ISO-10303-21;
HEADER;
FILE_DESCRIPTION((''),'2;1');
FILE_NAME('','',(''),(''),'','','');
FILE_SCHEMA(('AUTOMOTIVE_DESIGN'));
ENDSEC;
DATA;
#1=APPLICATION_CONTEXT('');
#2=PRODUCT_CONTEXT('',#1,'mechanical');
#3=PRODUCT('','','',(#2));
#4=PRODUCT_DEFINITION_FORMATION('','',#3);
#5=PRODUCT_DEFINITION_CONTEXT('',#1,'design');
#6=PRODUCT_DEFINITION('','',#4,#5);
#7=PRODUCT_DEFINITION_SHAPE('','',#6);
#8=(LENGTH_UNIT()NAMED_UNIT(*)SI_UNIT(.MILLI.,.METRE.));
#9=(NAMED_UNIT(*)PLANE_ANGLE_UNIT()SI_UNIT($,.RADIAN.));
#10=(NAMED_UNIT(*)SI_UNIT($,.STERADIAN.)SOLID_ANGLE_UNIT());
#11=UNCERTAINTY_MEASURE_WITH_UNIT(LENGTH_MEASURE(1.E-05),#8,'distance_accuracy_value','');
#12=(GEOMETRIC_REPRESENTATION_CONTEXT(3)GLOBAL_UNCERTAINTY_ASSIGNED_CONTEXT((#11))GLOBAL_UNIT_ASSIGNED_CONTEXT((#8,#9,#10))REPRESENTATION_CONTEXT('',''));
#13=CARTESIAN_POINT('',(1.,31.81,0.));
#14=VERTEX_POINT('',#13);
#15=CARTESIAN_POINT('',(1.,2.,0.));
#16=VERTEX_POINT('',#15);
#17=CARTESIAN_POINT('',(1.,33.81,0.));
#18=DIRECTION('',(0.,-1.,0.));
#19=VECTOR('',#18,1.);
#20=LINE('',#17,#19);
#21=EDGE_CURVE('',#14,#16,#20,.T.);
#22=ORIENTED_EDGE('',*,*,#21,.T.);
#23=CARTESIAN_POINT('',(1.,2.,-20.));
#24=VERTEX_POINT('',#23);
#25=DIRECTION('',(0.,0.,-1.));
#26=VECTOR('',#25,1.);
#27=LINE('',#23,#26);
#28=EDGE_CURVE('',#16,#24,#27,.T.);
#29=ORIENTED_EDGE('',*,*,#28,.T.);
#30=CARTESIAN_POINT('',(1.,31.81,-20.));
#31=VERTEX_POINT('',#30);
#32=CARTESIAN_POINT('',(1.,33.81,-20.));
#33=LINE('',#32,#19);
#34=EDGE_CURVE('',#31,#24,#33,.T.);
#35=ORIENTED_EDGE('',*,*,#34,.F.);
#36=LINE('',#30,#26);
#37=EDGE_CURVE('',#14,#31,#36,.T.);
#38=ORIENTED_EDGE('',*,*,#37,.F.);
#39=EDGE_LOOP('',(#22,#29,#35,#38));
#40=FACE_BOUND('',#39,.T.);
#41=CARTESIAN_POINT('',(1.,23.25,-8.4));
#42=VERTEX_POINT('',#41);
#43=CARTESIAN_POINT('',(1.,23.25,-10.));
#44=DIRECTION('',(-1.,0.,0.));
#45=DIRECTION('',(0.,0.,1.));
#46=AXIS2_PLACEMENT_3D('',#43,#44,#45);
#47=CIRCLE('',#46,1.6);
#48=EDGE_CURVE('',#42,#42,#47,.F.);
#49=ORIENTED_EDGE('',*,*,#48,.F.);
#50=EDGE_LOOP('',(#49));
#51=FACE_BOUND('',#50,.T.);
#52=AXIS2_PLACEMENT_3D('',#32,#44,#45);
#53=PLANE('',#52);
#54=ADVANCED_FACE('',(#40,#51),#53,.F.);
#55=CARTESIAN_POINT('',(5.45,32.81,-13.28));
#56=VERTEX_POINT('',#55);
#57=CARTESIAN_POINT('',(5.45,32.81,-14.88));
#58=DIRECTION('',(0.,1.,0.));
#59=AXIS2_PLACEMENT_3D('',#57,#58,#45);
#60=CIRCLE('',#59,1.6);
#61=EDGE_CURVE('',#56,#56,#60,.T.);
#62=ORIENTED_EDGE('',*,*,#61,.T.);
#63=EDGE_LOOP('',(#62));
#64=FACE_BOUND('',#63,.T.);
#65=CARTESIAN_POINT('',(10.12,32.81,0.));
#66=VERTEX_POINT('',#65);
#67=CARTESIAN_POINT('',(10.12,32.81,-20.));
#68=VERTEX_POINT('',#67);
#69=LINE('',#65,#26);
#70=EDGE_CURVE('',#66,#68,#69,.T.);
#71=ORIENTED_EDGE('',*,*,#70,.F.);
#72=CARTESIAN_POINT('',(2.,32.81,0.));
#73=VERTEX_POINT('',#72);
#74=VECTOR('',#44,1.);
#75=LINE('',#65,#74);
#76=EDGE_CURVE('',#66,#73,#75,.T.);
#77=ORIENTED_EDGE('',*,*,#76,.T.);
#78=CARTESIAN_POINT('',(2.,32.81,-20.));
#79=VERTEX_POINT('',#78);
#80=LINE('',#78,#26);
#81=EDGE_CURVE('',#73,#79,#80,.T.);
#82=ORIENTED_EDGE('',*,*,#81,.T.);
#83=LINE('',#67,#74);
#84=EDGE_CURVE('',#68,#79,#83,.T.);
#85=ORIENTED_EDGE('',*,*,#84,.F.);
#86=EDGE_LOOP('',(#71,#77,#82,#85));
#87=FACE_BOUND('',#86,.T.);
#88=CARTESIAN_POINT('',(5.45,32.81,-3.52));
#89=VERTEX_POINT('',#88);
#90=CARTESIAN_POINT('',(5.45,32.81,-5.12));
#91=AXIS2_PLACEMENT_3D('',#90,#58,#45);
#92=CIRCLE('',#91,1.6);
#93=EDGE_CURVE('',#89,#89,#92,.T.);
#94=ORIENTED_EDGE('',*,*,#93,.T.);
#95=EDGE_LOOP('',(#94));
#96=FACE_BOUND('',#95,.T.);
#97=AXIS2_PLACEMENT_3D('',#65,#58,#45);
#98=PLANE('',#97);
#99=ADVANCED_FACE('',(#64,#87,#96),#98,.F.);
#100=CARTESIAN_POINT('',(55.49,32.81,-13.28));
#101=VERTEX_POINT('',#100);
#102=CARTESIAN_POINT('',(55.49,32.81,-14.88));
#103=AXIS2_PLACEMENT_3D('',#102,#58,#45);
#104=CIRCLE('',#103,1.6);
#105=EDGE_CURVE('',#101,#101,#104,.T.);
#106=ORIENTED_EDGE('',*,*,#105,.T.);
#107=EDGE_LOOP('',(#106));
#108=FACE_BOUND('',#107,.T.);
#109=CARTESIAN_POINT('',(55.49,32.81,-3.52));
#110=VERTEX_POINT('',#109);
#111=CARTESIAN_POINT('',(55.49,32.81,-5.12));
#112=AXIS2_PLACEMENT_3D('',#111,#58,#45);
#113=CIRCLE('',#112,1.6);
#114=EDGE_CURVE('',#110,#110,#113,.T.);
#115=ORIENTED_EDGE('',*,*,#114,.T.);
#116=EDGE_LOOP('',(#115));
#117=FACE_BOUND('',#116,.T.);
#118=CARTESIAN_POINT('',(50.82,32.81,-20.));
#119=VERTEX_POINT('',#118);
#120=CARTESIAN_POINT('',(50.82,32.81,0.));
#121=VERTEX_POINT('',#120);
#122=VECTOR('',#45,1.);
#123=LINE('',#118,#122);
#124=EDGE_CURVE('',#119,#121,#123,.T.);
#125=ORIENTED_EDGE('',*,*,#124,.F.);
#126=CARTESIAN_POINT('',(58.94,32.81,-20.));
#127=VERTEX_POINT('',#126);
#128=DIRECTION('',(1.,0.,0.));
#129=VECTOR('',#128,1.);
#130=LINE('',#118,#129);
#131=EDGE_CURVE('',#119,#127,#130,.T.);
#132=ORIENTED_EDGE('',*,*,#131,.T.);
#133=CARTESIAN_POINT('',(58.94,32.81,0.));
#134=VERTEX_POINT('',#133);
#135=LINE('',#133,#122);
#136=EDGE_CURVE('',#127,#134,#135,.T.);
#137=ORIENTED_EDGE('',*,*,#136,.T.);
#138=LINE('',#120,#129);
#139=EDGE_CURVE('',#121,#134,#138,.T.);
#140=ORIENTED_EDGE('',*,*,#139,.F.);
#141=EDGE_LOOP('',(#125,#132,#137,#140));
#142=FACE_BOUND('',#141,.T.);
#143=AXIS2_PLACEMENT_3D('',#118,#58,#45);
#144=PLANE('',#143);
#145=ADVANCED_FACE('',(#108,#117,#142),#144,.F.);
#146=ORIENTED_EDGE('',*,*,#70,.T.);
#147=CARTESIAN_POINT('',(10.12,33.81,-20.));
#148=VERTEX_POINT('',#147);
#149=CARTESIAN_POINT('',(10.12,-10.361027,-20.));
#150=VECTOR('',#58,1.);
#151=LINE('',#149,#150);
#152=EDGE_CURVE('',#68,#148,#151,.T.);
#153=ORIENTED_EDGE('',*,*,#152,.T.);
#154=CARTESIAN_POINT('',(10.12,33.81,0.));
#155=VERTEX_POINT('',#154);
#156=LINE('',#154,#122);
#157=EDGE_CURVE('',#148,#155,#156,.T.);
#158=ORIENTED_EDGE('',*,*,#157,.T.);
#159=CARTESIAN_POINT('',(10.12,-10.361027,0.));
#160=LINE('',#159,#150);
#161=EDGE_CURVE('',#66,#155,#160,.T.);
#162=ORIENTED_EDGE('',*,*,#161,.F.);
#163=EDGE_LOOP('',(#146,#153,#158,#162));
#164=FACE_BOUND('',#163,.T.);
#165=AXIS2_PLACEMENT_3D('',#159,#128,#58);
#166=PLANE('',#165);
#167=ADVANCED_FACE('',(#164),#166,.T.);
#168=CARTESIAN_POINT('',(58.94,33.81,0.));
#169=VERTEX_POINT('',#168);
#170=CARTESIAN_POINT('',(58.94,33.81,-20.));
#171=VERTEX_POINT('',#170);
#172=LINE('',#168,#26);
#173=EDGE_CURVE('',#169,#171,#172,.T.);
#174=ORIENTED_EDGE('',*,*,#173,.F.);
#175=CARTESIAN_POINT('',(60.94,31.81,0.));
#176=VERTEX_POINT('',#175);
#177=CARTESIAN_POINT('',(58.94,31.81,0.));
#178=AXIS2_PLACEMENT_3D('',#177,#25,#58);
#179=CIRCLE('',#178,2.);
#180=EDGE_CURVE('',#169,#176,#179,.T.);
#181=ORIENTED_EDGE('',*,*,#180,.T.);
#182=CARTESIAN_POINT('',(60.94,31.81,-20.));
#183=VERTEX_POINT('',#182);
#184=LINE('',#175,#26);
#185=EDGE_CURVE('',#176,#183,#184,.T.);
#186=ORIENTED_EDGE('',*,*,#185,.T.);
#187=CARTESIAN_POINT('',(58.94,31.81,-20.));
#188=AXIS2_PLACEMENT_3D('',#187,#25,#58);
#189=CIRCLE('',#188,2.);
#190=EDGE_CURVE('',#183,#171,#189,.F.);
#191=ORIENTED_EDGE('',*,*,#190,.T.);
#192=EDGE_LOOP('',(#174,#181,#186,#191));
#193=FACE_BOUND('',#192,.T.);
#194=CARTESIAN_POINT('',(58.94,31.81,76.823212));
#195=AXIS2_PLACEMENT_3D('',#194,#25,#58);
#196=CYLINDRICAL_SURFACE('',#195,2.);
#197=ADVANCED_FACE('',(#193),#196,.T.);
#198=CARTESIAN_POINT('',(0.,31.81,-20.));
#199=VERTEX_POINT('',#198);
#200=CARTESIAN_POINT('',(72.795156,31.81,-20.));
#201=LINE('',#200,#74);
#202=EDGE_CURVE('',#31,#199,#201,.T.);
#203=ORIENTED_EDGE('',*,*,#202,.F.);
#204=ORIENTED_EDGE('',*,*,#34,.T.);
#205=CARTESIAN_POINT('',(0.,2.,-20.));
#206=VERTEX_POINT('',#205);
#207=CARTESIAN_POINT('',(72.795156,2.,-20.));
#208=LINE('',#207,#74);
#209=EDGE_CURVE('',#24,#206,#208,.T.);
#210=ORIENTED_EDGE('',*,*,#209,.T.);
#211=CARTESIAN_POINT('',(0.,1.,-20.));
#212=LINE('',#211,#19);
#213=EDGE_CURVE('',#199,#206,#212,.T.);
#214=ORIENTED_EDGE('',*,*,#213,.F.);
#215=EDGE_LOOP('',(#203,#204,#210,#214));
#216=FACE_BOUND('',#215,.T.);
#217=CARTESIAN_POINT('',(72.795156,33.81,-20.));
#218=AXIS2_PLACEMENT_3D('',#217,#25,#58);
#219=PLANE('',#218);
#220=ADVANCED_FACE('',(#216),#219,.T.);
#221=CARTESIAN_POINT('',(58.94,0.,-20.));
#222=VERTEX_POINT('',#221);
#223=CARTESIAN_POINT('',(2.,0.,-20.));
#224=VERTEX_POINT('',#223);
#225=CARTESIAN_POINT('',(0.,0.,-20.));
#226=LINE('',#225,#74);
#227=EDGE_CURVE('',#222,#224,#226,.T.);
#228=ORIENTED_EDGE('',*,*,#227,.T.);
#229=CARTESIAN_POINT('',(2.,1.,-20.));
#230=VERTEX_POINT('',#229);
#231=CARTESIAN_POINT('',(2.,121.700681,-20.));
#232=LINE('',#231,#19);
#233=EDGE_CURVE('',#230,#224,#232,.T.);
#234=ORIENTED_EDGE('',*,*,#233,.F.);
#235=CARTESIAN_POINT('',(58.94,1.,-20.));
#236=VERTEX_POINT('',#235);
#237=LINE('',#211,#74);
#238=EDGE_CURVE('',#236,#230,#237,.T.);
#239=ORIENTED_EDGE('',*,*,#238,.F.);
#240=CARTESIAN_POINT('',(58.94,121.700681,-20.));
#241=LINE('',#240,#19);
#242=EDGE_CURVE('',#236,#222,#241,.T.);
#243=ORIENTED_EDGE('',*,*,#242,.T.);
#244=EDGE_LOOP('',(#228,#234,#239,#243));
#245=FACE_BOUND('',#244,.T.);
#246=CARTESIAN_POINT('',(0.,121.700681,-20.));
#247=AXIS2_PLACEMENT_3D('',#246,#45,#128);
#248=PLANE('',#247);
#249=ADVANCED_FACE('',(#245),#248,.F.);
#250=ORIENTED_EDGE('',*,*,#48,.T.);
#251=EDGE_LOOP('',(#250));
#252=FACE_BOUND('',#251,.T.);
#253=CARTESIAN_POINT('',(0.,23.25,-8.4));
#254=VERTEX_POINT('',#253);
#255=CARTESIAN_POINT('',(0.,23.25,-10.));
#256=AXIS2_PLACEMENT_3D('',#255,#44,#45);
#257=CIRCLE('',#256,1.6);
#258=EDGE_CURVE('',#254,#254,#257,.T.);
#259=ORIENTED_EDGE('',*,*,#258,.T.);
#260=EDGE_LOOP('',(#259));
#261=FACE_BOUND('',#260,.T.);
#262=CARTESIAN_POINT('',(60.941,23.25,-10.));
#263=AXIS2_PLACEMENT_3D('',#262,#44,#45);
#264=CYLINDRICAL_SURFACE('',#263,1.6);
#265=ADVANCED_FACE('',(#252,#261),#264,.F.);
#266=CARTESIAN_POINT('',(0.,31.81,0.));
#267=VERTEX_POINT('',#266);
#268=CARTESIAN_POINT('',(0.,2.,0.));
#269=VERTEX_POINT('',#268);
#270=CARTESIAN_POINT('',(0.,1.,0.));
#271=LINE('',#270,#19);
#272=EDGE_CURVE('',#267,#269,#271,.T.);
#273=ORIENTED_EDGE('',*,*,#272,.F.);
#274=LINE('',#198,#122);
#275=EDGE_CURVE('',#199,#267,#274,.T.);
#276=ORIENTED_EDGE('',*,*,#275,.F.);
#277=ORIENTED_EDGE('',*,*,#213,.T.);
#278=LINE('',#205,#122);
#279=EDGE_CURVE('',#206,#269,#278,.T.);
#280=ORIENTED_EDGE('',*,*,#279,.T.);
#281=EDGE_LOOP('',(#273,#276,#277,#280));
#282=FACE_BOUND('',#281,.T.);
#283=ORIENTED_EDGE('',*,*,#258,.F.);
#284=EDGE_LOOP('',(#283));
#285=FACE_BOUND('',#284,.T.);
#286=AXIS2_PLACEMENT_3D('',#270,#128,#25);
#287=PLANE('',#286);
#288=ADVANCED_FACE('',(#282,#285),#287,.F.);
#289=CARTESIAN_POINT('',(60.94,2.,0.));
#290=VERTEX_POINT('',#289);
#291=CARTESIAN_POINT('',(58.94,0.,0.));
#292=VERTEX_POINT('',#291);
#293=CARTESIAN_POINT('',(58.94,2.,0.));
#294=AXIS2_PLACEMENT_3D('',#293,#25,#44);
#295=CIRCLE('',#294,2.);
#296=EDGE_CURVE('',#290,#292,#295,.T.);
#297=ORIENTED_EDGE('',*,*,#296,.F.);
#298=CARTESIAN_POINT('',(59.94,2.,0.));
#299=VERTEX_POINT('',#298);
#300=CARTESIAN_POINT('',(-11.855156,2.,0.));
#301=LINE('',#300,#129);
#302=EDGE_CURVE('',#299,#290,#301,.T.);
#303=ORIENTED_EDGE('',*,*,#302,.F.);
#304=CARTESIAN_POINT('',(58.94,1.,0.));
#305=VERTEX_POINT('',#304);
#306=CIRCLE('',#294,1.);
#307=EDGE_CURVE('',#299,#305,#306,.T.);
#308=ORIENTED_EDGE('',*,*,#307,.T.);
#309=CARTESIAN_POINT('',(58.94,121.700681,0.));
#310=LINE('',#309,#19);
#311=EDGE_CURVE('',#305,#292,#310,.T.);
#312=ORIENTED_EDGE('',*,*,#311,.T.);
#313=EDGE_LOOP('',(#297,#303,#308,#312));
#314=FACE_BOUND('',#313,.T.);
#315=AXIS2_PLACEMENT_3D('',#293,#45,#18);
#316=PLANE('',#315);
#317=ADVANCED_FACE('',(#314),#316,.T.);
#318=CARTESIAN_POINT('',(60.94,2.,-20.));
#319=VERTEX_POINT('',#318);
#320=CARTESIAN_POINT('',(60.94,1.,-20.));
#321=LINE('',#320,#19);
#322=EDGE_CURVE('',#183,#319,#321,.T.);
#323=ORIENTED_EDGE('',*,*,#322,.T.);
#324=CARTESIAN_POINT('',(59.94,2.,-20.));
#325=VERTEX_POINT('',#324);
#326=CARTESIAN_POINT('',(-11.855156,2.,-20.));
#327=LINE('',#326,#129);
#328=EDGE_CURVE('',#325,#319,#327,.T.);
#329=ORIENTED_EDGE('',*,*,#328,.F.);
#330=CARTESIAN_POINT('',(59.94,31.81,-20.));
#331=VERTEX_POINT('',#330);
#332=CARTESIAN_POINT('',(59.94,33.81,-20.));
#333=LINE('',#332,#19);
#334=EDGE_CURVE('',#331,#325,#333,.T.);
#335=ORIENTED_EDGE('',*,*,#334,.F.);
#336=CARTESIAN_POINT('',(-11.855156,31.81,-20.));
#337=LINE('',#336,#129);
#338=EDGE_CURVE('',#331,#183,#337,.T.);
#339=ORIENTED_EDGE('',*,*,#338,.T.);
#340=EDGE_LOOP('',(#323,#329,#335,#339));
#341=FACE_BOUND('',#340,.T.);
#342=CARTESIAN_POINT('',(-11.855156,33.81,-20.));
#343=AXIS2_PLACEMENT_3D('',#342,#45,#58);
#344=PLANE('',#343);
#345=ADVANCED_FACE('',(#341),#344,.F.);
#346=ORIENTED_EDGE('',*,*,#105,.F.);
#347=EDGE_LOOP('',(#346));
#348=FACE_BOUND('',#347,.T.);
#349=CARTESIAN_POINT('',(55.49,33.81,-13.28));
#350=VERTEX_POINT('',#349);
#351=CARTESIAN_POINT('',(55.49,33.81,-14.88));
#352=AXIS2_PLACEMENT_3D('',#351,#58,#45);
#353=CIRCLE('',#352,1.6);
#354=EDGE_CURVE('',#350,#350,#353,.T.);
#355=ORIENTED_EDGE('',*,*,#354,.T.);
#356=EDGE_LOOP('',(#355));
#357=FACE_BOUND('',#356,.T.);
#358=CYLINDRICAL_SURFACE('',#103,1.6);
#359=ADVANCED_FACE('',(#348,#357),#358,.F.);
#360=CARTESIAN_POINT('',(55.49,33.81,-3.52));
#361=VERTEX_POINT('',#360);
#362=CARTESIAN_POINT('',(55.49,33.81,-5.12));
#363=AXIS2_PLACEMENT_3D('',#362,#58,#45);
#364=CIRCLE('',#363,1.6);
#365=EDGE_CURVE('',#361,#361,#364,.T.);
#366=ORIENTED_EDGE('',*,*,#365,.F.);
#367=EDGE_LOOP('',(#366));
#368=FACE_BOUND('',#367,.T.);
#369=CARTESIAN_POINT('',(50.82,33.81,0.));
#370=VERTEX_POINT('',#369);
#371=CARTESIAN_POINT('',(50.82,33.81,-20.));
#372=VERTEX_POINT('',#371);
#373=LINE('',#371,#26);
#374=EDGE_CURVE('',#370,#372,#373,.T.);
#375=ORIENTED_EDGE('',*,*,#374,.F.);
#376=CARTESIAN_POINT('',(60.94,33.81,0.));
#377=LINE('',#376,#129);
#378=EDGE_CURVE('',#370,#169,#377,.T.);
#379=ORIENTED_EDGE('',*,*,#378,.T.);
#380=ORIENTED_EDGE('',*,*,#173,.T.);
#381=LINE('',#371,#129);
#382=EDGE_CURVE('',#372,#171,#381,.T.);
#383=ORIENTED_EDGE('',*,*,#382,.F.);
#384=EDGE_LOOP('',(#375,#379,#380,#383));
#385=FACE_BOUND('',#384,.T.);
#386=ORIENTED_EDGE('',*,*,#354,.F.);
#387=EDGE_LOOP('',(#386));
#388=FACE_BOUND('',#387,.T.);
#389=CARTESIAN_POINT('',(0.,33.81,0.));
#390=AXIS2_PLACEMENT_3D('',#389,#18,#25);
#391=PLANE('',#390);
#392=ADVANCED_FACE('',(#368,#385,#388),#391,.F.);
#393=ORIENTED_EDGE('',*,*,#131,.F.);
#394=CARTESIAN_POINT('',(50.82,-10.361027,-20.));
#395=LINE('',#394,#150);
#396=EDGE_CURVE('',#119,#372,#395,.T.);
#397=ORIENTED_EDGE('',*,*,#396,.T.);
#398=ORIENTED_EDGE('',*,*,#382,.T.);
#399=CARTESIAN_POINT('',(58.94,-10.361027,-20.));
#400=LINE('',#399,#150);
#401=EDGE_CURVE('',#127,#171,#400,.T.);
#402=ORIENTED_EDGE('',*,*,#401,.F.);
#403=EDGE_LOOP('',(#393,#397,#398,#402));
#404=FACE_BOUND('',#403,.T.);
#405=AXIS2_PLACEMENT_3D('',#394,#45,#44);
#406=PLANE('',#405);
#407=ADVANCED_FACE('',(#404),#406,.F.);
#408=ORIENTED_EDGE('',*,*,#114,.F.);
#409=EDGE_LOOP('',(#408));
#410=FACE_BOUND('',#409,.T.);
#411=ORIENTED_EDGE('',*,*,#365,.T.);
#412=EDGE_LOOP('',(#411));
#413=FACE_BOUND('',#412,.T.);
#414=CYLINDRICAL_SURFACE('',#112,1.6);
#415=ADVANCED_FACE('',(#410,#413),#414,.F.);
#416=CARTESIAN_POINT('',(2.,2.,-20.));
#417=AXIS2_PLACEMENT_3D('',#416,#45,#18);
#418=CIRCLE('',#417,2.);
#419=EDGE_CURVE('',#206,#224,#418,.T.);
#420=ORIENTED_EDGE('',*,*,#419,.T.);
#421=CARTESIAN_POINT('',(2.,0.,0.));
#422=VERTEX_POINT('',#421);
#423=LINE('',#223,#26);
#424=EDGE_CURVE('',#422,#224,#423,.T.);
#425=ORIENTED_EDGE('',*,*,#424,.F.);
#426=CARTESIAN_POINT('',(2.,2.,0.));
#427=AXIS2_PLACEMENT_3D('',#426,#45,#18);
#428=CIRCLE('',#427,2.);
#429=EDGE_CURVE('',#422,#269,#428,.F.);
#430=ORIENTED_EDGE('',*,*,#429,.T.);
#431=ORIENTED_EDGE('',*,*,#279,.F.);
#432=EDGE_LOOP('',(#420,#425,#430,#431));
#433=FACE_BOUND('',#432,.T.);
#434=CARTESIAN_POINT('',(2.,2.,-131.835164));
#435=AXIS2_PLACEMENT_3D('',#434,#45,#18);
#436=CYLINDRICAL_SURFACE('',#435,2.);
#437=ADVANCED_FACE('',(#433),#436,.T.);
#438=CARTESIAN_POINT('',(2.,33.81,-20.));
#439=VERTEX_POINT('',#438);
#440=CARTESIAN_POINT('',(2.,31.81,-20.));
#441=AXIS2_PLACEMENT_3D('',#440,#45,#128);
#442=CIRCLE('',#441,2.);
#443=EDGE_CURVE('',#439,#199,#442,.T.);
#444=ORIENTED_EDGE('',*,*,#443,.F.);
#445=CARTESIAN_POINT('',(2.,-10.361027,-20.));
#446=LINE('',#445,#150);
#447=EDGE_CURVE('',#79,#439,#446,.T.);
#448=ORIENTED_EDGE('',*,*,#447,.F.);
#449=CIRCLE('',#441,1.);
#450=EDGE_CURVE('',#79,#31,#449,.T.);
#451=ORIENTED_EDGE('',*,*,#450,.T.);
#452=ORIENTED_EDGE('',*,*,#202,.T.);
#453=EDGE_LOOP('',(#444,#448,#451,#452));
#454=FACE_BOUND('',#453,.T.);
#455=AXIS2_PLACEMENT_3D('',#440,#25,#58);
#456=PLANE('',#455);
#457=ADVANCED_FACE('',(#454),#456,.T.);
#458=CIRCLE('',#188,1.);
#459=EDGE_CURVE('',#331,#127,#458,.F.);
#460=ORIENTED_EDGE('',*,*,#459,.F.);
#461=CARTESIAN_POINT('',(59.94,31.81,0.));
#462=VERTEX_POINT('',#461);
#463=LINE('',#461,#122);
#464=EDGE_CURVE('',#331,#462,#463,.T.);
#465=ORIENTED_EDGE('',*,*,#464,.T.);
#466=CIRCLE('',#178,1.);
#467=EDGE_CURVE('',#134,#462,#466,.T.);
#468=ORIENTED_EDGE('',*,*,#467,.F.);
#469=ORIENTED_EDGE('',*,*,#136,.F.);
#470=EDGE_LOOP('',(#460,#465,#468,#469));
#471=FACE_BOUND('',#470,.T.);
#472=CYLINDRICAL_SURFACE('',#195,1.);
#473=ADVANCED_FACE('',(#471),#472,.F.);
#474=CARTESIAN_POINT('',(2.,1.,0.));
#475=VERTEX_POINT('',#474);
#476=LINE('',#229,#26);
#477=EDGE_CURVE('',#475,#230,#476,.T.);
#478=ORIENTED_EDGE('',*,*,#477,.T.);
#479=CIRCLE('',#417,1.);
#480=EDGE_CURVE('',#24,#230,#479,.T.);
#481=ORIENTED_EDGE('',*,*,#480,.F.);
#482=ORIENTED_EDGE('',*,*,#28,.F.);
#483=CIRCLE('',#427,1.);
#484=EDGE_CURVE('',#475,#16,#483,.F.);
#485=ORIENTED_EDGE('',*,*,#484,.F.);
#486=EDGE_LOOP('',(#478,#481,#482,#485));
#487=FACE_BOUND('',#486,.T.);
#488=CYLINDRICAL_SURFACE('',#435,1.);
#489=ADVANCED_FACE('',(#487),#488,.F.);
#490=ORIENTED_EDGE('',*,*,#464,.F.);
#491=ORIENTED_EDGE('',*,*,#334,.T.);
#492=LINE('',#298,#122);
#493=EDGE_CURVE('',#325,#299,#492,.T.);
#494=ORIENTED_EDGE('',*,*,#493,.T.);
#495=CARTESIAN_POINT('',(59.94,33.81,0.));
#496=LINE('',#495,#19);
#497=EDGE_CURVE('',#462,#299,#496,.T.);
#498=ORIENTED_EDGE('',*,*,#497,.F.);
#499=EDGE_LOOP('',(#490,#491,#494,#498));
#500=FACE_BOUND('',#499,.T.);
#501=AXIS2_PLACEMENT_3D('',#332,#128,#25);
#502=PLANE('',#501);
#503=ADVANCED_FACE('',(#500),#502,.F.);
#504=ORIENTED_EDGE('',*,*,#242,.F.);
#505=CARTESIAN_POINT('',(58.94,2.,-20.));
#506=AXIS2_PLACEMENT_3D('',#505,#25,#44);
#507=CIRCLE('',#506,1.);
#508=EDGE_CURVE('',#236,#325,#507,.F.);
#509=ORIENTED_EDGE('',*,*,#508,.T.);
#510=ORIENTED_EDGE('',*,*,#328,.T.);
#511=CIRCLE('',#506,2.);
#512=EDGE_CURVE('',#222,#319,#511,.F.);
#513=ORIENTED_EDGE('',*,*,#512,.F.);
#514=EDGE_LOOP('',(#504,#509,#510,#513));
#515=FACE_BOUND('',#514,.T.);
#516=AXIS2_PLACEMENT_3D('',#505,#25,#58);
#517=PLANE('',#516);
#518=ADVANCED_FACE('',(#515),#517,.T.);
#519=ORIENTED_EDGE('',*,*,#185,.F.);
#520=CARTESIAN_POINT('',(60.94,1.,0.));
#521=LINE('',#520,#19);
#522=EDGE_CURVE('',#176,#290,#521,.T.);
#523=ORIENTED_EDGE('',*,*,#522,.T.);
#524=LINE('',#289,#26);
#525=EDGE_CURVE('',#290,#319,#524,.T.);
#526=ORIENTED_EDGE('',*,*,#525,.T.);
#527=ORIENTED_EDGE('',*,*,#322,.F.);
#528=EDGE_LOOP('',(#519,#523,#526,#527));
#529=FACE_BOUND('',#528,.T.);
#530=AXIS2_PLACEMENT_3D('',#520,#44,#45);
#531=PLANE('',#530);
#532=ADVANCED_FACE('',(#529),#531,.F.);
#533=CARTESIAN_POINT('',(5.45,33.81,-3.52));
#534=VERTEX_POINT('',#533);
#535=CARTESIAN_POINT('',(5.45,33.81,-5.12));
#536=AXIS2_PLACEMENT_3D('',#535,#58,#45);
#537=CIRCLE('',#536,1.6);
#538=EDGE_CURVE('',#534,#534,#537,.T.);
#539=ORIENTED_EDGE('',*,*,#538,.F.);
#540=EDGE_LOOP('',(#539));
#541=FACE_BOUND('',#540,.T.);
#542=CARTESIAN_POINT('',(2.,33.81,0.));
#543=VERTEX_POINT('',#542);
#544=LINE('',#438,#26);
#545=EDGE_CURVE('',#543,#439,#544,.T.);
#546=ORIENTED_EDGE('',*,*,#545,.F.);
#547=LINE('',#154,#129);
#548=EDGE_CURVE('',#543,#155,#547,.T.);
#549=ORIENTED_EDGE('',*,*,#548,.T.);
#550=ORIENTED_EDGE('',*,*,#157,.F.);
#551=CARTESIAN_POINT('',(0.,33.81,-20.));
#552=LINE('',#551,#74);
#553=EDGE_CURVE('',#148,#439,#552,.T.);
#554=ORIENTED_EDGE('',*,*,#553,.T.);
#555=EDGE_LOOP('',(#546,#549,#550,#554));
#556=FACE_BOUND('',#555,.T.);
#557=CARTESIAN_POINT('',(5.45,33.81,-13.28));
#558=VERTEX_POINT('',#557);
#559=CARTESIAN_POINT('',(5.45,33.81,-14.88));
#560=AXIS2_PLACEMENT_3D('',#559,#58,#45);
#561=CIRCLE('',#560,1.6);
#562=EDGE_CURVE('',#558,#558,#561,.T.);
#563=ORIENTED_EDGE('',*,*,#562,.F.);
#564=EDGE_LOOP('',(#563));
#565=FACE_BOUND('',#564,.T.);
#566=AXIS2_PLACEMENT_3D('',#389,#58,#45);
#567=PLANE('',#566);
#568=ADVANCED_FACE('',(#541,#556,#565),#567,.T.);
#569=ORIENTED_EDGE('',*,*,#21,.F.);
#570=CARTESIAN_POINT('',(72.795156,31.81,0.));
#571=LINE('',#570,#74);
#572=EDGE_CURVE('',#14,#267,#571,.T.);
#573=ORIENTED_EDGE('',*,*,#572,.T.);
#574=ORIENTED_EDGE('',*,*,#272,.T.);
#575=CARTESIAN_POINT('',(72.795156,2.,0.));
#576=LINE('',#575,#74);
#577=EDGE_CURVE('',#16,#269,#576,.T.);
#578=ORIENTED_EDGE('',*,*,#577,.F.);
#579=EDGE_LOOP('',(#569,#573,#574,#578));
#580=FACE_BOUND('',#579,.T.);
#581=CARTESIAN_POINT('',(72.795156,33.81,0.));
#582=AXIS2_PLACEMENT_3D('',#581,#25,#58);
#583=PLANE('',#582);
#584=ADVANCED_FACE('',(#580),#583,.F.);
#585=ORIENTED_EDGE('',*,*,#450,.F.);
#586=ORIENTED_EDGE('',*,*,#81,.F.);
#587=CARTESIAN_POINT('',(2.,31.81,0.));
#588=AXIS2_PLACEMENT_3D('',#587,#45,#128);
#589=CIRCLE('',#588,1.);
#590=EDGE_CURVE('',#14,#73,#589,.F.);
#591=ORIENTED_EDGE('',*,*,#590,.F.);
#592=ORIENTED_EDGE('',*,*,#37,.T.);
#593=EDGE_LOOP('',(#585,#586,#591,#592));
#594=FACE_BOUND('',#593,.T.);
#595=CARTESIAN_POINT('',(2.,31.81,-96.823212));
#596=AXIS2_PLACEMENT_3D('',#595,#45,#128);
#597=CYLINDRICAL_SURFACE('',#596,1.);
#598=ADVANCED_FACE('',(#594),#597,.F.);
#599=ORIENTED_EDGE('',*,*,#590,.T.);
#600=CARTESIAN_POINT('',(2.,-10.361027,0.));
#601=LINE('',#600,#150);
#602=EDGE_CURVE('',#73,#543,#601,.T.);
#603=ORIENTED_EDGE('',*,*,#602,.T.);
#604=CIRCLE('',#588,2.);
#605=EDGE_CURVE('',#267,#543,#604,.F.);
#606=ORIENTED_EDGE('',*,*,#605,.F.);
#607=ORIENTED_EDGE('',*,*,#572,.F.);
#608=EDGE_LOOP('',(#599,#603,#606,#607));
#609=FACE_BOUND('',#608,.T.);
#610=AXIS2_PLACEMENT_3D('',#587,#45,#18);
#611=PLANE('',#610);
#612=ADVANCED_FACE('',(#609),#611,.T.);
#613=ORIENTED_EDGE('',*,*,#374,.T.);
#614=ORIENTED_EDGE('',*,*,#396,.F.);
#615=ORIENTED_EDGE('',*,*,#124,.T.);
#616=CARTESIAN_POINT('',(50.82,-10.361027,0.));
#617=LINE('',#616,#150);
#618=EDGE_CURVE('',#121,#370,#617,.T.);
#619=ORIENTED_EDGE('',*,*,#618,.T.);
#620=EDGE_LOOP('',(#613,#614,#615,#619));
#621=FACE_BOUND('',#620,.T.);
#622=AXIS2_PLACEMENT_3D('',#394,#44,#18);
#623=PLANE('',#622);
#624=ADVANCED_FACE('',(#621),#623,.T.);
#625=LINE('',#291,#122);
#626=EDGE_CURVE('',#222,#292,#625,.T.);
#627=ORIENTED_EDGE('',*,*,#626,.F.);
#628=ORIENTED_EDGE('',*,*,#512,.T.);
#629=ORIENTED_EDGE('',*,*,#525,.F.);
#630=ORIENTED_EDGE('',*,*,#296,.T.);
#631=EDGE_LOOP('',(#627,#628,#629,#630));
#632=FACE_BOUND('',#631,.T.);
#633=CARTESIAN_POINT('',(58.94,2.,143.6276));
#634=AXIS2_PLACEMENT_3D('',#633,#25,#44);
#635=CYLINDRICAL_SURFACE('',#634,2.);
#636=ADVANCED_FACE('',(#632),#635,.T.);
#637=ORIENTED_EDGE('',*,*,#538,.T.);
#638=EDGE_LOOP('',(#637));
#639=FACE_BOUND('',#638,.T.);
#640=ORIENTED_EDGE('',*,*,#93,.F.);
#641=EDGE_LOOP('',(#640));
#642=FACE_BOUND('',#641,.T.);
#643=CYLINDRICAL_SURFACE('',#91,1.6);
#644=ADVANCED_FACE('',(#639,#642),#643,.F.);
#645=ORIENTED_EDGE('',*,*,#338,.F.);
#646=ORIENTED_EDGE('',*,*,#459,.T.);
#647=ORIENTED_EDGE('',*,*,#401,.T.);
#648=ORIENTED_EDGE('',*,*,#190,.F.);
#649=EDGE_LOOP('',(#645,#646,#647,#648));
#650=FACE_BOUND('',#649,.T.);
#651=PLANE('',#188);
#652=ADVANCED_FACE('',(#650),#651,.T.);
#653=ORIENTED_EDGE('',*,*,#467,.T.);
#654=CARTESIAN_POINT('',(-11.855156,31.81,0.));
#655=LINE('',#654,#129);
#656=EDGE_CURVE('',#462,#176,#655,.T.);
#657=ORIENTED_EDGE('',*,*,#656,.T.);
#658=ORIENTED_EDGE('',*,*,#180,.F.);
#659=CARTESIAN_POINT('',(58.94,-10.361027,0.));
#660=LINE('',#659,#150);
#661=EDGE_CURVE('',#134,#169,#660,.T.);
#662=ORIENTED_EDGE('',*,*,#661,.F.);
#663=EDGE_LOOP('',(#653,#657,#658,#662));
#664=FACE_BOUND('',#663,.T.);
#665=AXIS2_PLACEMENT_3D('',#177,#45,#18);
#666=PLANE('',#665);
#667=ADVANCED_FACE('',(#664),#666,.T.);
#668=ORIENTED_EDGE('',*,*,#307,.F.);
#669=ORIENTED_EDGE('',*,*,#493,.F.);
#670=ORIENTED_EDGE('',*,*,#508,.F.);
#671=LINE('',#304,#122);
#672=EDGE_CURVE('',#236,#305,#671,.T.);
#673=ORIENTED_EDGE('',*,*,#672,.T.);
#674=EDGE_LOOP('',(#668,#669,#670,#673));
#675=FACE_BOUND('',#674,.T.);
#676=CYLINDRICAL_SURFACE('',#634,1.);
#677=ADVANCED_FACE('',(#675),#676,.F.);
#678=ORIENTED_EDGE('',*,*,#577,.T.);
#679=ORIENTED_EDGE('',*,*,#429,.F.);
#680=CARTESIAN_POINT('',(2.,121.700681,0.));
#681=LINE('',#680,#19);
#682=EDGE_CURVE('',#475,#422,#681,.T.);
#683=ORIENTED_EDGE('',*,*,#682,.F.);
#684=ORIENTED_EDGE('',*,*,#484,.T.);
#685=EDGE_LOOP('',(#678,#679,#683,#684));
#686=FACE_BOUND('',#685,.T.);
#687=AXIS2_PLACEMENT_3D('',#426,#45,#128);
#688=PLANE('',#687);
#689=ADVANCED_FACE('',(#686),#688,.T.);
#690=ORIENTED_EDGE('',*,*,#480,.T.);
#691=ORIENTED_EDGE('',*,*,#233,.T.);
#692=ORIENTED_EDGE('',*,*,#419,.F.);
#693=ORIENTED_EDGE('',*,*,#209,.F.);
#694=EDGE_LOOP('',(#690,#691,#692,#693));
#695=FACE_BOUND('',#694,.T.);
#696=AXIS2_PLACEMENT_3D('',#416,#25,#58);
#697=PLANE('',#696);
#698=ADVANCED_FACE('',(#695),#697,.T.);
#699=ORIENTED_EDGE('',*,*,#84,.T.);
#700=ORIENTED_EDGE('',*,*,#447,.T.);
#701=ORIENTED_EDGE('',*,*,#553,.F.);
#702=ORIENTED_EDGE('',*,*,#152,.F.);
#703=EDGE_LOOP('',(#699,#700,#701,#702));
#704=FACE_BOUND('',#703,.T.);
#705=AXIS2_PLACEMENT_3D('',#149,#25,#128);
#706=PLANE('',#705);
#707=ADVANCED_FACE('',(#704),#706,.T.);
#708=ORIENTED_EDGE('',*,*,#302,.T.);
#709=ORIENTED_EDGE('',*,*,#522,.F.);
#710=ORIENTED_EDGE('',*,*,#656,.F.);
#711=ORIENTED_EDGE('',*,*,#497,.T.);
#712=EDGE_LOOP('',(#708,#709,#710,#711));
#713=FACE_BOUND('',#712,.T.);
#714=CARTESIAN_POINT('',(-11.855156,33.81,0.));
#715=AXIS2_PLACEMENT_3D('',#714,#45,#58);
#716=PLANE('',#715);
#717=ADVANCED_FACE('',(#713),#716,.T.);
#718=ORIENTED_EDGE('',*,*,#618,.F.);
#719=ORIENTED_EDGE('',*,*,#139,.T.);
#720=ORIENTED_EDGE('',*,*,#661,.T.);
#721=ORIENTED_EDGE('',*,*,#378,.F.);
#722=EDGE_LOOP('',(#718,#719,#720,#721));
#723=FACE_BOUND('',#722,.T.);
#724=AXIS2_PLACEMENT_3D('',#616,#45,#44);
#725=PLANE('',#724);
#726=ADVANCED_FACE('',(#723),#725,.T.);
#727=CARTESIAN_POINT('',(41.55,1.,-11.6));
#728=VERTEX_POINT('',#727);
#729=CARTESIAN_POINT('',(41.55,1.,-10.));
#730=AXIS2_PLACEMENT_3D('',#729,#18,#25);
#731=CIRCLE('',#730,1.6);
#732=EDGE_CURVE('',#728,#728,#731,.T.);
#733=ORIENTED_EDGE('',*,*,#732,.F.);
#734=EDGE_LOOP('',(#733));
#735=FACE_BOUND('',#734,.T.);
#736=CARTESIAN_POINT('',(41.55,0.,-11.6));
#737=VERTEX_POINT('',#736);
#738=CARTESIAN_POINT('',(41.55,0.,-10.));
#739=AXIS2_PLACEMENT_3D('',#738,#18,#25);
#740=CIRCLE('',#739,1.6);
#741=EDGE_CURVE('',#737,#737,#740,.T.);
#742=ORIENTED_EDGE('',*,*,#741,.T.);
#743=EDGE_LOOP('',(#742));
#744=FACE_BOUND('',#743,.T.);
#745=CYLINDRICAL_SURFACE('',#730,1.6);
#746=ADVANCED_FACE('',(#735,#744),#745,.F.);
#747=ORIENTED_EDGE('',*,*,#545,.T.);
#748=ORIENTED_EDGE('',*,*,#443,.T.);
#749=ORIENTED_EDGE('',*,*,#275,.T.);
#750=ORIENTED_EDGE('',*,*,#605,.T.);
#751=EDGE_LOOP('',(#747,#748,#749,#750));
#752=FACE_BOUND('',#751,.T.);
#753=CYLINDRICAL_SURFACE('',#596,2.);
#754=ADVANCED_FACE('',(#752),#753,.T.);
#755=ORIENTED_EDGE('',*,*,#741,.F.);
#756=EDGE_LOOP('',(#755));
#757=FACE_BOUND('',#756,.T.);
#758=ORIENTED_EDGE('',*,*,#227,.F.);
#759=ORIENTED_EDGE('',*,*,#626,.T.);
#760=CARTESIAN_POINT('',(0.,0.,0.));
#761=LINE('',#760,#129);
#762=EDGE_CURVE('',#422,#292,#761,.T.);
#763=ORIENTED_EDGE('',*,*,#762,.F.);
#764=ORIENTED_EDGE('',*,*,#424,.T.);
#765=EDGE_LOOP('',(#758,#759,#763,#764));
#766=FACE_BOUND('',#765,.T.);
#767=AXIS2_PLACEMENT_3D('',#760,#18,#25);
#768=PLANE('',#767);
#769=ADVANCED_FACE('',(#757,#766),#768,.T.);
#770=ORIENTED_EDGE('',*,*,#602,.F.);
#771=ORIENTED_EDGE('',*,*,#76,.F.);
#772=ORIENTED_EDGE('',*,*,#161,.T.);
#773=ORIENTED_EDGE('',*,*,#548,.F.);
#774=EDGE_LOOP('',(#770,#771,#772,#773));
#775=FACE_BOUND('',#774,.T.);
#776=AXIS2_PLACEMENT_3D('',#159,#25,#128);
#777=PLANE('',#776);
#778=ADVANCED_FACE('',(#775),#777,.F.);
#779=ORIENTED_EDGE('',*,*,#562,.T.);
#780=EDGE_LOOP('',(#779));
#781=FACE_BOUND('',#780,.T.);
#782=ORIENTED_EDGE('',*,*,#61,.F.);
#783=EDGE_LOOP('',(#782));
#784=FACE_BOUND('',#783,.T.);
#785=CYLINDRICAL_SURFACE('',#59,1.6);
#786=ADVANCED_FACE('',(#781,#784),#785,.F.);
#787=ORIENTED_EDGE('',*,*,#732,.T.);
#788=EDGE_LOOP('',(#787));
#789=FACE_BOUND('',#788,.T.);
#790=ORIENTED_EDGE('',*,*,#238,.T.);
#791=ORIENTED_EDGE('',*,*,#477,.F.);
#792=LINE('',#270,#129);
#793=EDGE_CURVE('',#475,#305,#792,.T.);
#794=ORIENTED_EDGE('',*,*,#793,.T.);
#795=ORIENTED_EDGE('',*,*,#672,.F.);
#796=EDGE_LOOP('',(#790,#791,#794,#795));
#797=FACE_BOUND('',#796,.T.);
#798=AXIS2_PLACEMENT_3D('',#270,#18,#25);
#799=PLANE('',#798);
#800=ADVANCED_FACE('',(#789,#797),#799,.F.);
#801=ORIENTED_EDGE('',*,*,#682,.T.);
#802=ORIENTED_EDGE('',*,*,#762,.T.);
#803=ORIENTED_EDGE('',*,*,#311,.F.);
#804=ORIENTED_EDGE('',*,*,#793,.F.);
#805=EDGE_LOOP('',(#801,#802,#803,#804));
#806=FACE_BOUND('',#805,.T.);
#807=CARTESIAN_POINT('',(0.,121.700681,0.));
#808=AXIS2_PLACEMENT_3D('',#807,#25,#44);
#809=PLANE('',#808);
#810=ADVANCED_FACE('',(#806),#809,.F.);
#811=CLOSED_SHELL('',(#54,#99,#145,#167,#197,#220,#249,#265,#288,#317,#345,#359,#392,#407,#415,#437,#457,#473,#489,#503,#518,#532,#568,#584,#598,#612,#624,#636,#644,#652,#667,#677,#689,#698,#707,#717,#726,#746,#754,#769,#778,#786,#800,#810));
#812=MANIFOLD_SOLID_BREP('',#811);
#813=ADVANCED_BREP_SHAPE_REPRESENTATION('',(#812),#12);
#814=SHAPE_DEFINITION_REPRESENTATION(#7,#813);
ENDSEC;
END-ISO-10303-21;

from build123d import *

# Parameters (mm, degrees)
SKETCH_2_W                = 60.94
SKETCH_2_H                = 20
EXTRUDE_1_DEPTH           = 1
SKETCH_3_W                = 1
SKETCH_3_H                = 20
EXTRUDE_2_DEPTH           = 32.81
SKETCH_4_W                = 1
SKETCH_4_H                = 20
EXTRUDE_3_DEPTH           = 32.81
SKETCH_9_W                = 20
SKETCH_9_H                = 1
EXTRUDE_8_DEPTH           = 9.12
SKETCH_10_W               = 20
SKETCH_10_H               = 1
EXTRUDE_9_DEPTH           = 9.12
SKETCH_13_R               = 1.6
CUT_EXTRUDE_2_DEPTH       = 1
SKETCH_14_R               = 1.6
CUT_EXTRUDE_3_DEPTH       = 1
SKETCH_15_R               = 1.6
CUT_EXTRUDE_4_DEPTH       = 1
SKETCH_16_R               = 1.6
CUT_EXTRUDE_5_DEPTH       = 1
SKETCH_17_R               = 1.6
CUT_EXTRUDE_6_DEPTH       = 1
CUT_EXTRUDE_7_REACH       = 74.504
SKETCH_18_R               = 1.6
SHEET_START               = 1
SHEET_METAL_1_OUTLINE_W   = 10.12
SHEET_METAL_1_OUTLINE_H   = 20
SHEET_METAL_1_OUTLINE_R   = 1.6
SHEET_METAL_1_DEPTH       = 32.81
SHEET_METAL_1_2_OUTLINE_W = 40.64238898
SHEET_METAL_1_2_OUTLINE_H = 20
SHEET_METAL_1_2_OUTLINE_R = 1.6
SHEET_METAL_1_2_DEPTH     = 1
SHEET_START_2             = -20
SHEET_METAL_1_3_DEPTH     = 20
SHEET_METAL_1_3_2_DEPTH   = 3.5199999
SHEET_START_3             = -3.5199999
SHEET_METAL_1_3_3_DEPTH   = 3.5199999
SHEET_START_4             = -13.2799999
SHEET_METAL_1_3_4_DEPTH   = 6.5599998
SHEET_METAL_1_3_5_DEPTH   = 1.6799998
SHEET_START_5             = -8.3999999
SHEET_METAL_1_3_6_DEPTH   = 1.6799998
SHEET_START_6             = -16.4800001
SHEET_METAL_1_3_7_DEPTH   = 12.9600002


with BuildPart() as part:
    # Sketch 2 → ﾎﾞｽ - 押し出し1 (new body)
    with BuildSketch(Plane(origin=(0, 0, 0), x_dir=(1, 0, 0), z_dir=(0, 1, 0))):
        with Locations((30.47, 10)):
            Rectangle(SKETCH_2_W, SKETCH_2_H)
    extrude(amount=EXTRUDE_1_DEPTH)

    # ｽｹｯﾁ3 → ﾎﾞｽ - 押し出し2 (add)
    with BuildSketch(Plane(origin=(0, 1, 0), x_dir=(1, 0, 0), z_dir=(0, 1, 0))):
        with Locations((60.44, 10)):
            Rectangle(SKETCH_3_W, SKETCH_3_H)
    extrude(amount=EXTRUDE_2_DEPTH)

    # ｽｹｯﾁ4 → ﾎﾞｽ - 押し出し3 (add)
    with BuildSketch(Plane(origin=(0, 1, 0), x_dir=(1, 0, 0), z_dir=(0, 1, 0))):
        with Locations((0.5, 10)):
            Rectangle(SKETCH_4_W, SKETCH_4_H)
    extrude(amount=EXTRUDE_3_DEPTH)

    # ｽｹｯﾁ9 → ﾎﾞｽ - 押し出し8 (add)
    with BuildSketch(Plane.ZY.offset(-59.94)):
        with Locations((-10, 33.31)):
            Rectangle(SKETCH_9_W, SKETCH_9_H)
    extrude(amount=EXTRUDE_8_DEPTH)

    # ｽｹｯﾁ10 → ﾎﾞｽ - 押し出し9 (add)
    with BuildSketch(Plane(origin=(1, 0, 0), x_dir=(0, 0, -1), z_dir=(1, 0, 0))):
        with Locations((10, 33.31)):
            Rectangle(SKETCH_10_W, SKETCH_10_H)
    extrude(amount=EXTRUDE_9_DEPTH)

    # ｽｹｯﾁ13 → ｶｯﾄ - 押し出し2 (cut)
    with BuildSketch(Plane(origin=(0, 33.81, 0), x_dir=(1, 0, 0), z_dir=(0, 1, 0))):
        with Locations(Location((55.49, 5.12, 0), (0, 0, 270))):
            Circle(SKETCH_13_R)
    extrude(amount=-CUT_EXTRUDE_2_DEPTH, mode=Mode.SUBTRACT)

    # ｽｹｯﾁ14 → ｶｯﾄ - 押し出し3 (cut)
    with BuildSketch(Plane(origin=(0, 33.81, 0), x_dir=(1, 0, 0), z_dir=(0, 1, 0))):
        with Locations(Location((55.49, 14.88, 0), (0, 0, 270))):
            Circle(SKETCH_14_R)
    extrude(amount=-CUT_EXTRUDE_3_DEPTH, mode=Mode.SUBTRACT)

    # ｽｹｯﾁ15 → ｶｯﾄ - 押し出し4 (cut)
    with BuildSketch(Plane(origin=(0, 33.81, 0), x_dir=(1, 0, 0), z_dir=(0, 1, 0))):
        with Locations(Location((5.45, 5.12, 0), (0, 0, 270))):
            Circle(SKETCH_15_R)
    extrude(amount=-CUT_EXTRUDE_4_DEPTH, mode=Mode.SUBTRACT)

    # ｽｹｯﾁ16 → ｶｯﾄ - 押し出し5 (cut)
    with BuildSketch(Plane(origin=(0, 33.81, 0), x_dir=(1, 0, 0), z_dir=(0, 1, 0))):
        with Locations(Location((5.45, 14.88, 0), (0, 0, 270))):
            Circle(SKETCH_16_R)
    extrude(amount=-CUT_EXTRUDE_5_DEPTH, mode=Mode.SUBTRACT)

    # ｽｹｯﾁ17 → ｶｯﾄ - 押し出し6 (cut)
    with BuildSketch(Plane(origin=(0, 0, 0), x_dir=(-1, 0, 0), z_dir=(0, -1, 0))):
        with Locations(Location((-41.55, 10, 0), (0, 0, 90))):
            Circle(SKETCH_17_R)
    extrude(amount=-CUT_EXTRUDE_6_DEPTH, mode=Mode.SUBTRACT)

    # ｽｹｯﾁ18 → ｶｯﾄ - 押し出し7 (cut, up to next)
    with BuildSketch(Plane.ZY, mode=Mode.PRIVATE) as cut_extrude_7_sk1:
        with Locations((-10, 23.25)):
            Circle(SKETCH_18_R)
    cut_extrude_7_tool1 = extrude(cut_extrude_7_sk1.sketch, amount=-CUT_EXTRUDE_7_REACH, mode=Mode.PRIVATE) & part.part
    add(cut_extrude_7_tool1.solids().sort_by_distance((0, 23.25, -10))[0], mode=Mode.SUBTRACT)

    # Sheet Metal 1: read off the stored shape, not the designer's step
    # Sheet Metal 1 outline → Sheet Metal 1 (cut)
    # profile 1 of 2: a face of its own
    with BuildSketch(Plane(origin=(0, 0, 0), x_dir=(1, 0, 0), z_dir=(0, 1, 0)).offset(SHEET_START)):
        with Locations((55.88, 10)):
            Rectangle(SHEET_METAL_1_OUTLINE_W, SHEET_METAL_1_OUTLINE_H)
        with Locations((55.49, 14.88)):
            Circle(SHEET_METAL_1_OUTLINE_R, mode=Mode.SUBTRACT)
        with Locations((55.49, 5.12)):
            Circle(SHEET_METAL_1_OUTLINE_R, mode=Mode.SUBTRACT)
    # profile 2 of 2: a face of its own
    with BuildSketch(Plane(origin=(0, 0, 0), x_dir=(1, 0, 0), z_dir=(0, 1, 0)).offset(SHEET_START)):
        with Locations((5.06, 10)):
            Rectangle(SHEET_METAL_1_OUTLINE_W, SHEET_METAL_1_OUTLINE_H)
        with Locations((5.45, 5.12)):
            Circle(SHEET_METAL_1_OUTLINE_R, mode=Mode.SUBTRACT)
        with Locations((5.45, 14.88)):
            Circle(SHEET_METAL_1_OUTLINE_R, mode=Mode.SUBTRACT)
    extrude(amount=SHEET_METAL_1_DEPTH, mode=Mode.SUBTRACT)

    # Sheet Metal 1 2 outline → Sheet Metal 1 2 (add)
    # profile 1 of 2: a face of its own
    with BuildSketch(Plane(origin=(0, 0, 0), x_dir=(1, 0, 0), z_dir=(0, 1, 0))):
        with Locations((81.26119449, 10)):
            Rectangle(SHEET_METAL_1_2_OUTLINE_W, SHEET_METAL_1_2_OUTLINE_H)
        with Locations((96.91238898, 5.12)):
            Circle(SHEET_METAL_1_2_OUTLINE_R, mode=Mode.SUBTRACT)
        with Locations((96.91238898, 14.88)):
            Circle(SHEET_METAL_1_2_OUTLINE_R, mode=Mode.SUBTRACT)
    # profile 2 of 2: a face of its own
    with BuildSketch(Plane(origin=(0, 0, 0), x_dir=(1, 0, 0), z_dir=(0, 1, 0))):
        with Locations((-20.32119449, 10)):
            Rectangle(SHEET_METAL_1_2_OUTLINE_W, SHEET_METAL_1_2_OUTLINE_H)
        with Locations((-35.97238898, 5.12)):
            Circle(SHEET_METAL_1_2_OUTLINE_R, mode=Mode.SUBTRACT)
        with Locations((-21.60619449, 10)):
            Circle(SHEET_METAL_1_2_OUTLINE_R, mode=Mode.SUBTRACT)
        with Locations((-35.97238898, 14.88)):
            Circle(SHEET_METAL_1_2_OUTLINE_R, mode=Mode.SUBTRACT)
    extrude(amount=SHEET_METAL_1_2_DEPTH)

    # Sheet Metal 1 3: read off the stored shape, not the designer's step
    # Sheet Metal 1 3 outline → Sheet Metal 1 3 (cut)
    with BuildSketch(Plane.XY.offset(SHEET_START_2)):
        with BuildLine():
            ThreePointArc((2, 0), (1, 0.267949193), (0.267949193, 1))
            Line((0.267949193, 1), (-40.64238898, 1))
            Line((-40.64238898, 1), (-40.64238898, 0))
            Line((-40.64238898, 0), (2, 0))
        make_face()
        with BuildLine():
            Line((101.58238898, 1), (60.672050807, 1))
            ThreePointArc((60.672050807, 1), (59.94, 0.267949193), (58.94, 0))
            Line((58.94, 0), (101.58238898, 0))
            Line((101.58238898, 0), (101.58238898, 1))
        make_face()
    extrude(amount=SHEET_METAL_1_3_DEPTH, mode=Mode.SUBTRACT)

    # Sheet Metal 1 3 2 outline → Sheet Metal 1 3 2 (add)
    with BuildSketch(Plane.XY.offset(SHEET_START_2)):
        with BuildLine():
            Line((2, 32.81), (10.12, 32.81))
            Line((10.12, 32.81), (10.12, 33.81))
            Line((10.12, 33.81), (2, 33.81))
            ThreePointArc((2, 33.81), (0.585786438, 33.224213562), (0, 31.81))
            Line((0, 31.81), (0, 2))
            ThreePointArc((0, 2), (0.068148348, 1.48236191), (0.267949193, 1))
            Line((0.267949193, 1), (2, 1))
            ThreePointArc((2, 1), (1.292893219, 1.292893219), (1, 2))
            Line((1, 2), (1, 31.81))
            ThreePointArc((1, 31.81), (1.292893219, 32.517106781), (2, 32.81))
        make_face()
        with BuildLine():
            Line((58.94, 33.81), (50.82, 33.81))
            Line((50.82, 33.81), (50.82, 32.81))
            Line((50.82, 32.81), (58.94, 32.81))
            ThreePointArc((58.94, 32.81), (59.647106781, 32.517106781), (59.94, 31.81))
            Line((59.94, 31.81), (59.94, 2))
            ThreePointArc((59.94, 2), (59.647106781, 1.292893219), (58.94, 1))
            Line((58.94, 1), (60.672050807, 1))
            ThreePointArc((60.672050807, 1), (60.871851652, 1.48236191), (60.94, 2))
            Line((60.94, 2), (60.94, 31.81))
            ThreePointArc((60.94, 31.81), (60.354213562, 33.224213562), (58.94, 33.81))
        make_face()
    extrude(amount=SHEET_METAL_1_3_2_DEPTH)

    # Sheet Metal 1 3 3 outline → Sheet Metal 1 3 3 (add)
    with BuildSketch(Plane.XY.offset(SHEET_START_3)):
        with BuildLine():
            Line((2, 32.81), (10.12, 32.81))
            Line((10.12, 32.81), (10.12, 33.81))
            Line((10.12, 33.81), (2, 33.81))
            ThreePointArc((2, 33.81), (0.585786438, 33.224213562), (0, 31.81))
            Line((0, 31.81), (0, 2))
            ThreePointArc((0, 2), (0.068148348, 1.48236191), (0.267949193, 1))
            Line((0.267949193, 1), (2, 1))
            ThreePointArc((2, 1), (1.292893219, 1.292893219), (1, 2))
            Line((1, 2), (1, 31.81))
            ThreePointArc((1, 31.81), (1.292893219, 32.517106781), (2, 32.81))
        make_face()
        with BuildLine():
            Line((58.94, 33.81), (50.82, 33.81))
            Line((50.82, 33.81), (50.82, 32.81))
            Line((50.82, 32.81), (58.94, 32.81))
            ThreePointArc((58.94, 32.81), (59.647106781, 32.517106781), (59.94, 31.81))
            Line((59.94, 31.81), (59.94, 2))
            ThreePointArc((59.94, 2), (59.647106781, 1.292893219), (58.94, 1))
            Line((58.94, 1), (60.672050807, 1))
            ThreePointArc((60.672050807, 1), (60.871851652, 1.48236191), (60.94, 2))
            Line((60.94, 2), (60.94, 31.81))
            ThreePointArc((60.94, 31.81), (60.354213562, 33.224213562), (58.94, 33.81))
        make_face()
    extrude(amount=SHEET_METAL_1_3_3_DEPTH)

    # Sheet Metal 1 3 4 outline → Sheet Metal 1 3 4 (add)
    with BuildSketch(Plane.XY.offset(SHEET_START_4)):
        with BuildLine():
            Line((58.94, 33.81), (50.82, 33.81))
            Line((50.82, 33.81), (50.82, 32.81))
            Line((50.82, 32.81), (58.94, 32.81))
            ThreePointArc((58.94, 32.81), (59.647106781, 32.517106781), (59.94, 31.81))
            Line((59.94, 31.81), (59.94, 2))
            ThreePointArc((59.94, 2), (59.647106781, 1.292893219), (58.94, 1))
            Line((58.94, 1), (60.672050807, 1))
            ThreePointArc((60.672050807, 1), (60.871851652, 1.48236191), (60.94, 2))
            Line((60.94, 2), (60.94, 31.81))
            ThreePointArc((60.94, 31.81), (60.354213562, 33.224213562), (58.94, 33.81))
        make_face()
    extrude(amount=SHEET_METAL_1_3_4_DEPTH)

    # Sheet Metal 1 3 5 outline → Sheet Metal 1 3 5 (add)
    with BuildSketch(Plane.XY.offset(SHEET_START_4)):
        with BuildLine():
            Line((2, 32.81), (10.12, 32.81))
            Line((10.12, 32.81), (10.12, 33.81))
            Line((10.12, 33.81), (2, 33.81))
            ThreePointArc((2, 33.81), (0.585786438, 33.224213562), (0, 31.81))
            Line((0, 31.81), (0, 2))
            ThreePointArc((0, 2), (0.068148348, 1.48236191), (0.267949193, 1))
            Line((0.267949193, 1), (2, 1))
            ThreePointArc((2, 1), (1.292893219, 1.292893219), (1, 2))
            Line((1, 2), (1, 31.81))
            ThreePointArc((1, 31.81), (1.292893219, 32.517106781), (2, 32.81))
        make_face()
    extrude(amount=SHEET_METAL_1_3_5_DEPTH)

    # Sheet Metal 1 3 6 outline → Sheet Metal 1 3 6 (add)
    with BuildSketch(Plane.XY.offset(SHEET_START_5)):
        with BuildLine():
            Line((2, 32.81), (10.12, 32.81))
            Line((10.12, 32.81), (10.12, 33.81))
            Line((10.12, 33.81), (2, 33.81))
            ThreePointArc((2, 33.81), (0.585786438, 33.224213562), (0, 31.81))
            Line((0, 31.81), (0, 2))
            ThreePointArc((0, 2), (0.068148348, 1.48236191), (0.267949193, 1))
            Line((0.267949193, 1), (2, 1))
            ThreePointArc((2, 1), (1.292893219, 1.292893219), (1, 2))
            Line((1, 2), (1, 31.81))
            ThreePointArc((1, 31.81), (1.292893219, 32.517106781), (2, 32.81))
        make_face()
    extrude(amount=SHEET_METAL_1_3_6_DEPTH)

    # Sheet Metal 1 3 7 outline → Sheet Metal 1 3 7 (add)
    with BuildSketch(Plane.XY.offset(SHEET_START_6)):
        with BuildLine():
            Line((2, 32.81), (10.12, 32.81))
            Line((10.12, 32.81), (10.12, 33.81))
            Line((10.12, 33.81), (2, 33.81))
            ThreePointArc((2, 33.81), (0.585786438, 33.224213562), (0, 31.81))
            Line((0, 31.81), (0, 2))
            ThreePointArc((0, 2), (0.068148348, 1.48236191), (0.267949193, 1))
            Line((0.267949193, 1), (2, 1))
            ThreePointArc((2, 1), (1.292893219, 1.292893219), (1, 2))
            Line((1, 2), (1, 31.81))
            ThreePointArc((1, 31.81), (1.292893219, 32.517106781), (2, 32.81))
        make_face()
        with BuildLine():
            ThreePointArc((59.94, 2), (59.647106781, 1.292893219), (58.94, 1))
            Line((58.94, 1), (60.672050807, 1))
            ThreePointArc((60.672050807, 1), (60.871851652, 1.48236191), (60.94, 2))
            Line((60.94, 2), (60.94, 31.81))
            ThreePointArc((60.94, 31.81), (60.354213562, 33.224213562), (58.94, 33.81))
            Line((58.94, 33.81), (50.82, 33.81))
            Line((50.82, 33.81), (50.82, 32.81))
            Line((50.82, 32.81), (58.94, 32.81))
            ThreePointArc((58.94, 32.81), (59.647106781, 32.517106781), (59.94, 31.81))
            Line((59.94, 31.81), (59.94, 2))
        make_face()
    extrude(amount=SHEET_METAL_1_3_7_DEPTH)

    # Sheet Metal 1 3 8: loft between two sections, ruled curve by curve
    sheet_metal_1_3_8_from = [
        Edge.make_three_point_arc((5.45, 32.81, -3.52), (7.05, 32.81, -5.12), (5.45, 32.81, -6.72)),
        Edge.make_three_point_arc((5.45, 32.81, -6.72), (3.85, 32.81, -5.12), (5.45, 32.81, -3.52)),
    ]
    sheet_metal_1_3_8_to = [
        Edge.make_three_point_arc((5.45, 33.81, -3.52), (7.05, 33.81, -5.12), (5.45, 33.81, -6.72)),
        Edge.make_three_point_arc((5.45, 33.81, -6.72), (3.85, 33.81, -5.12), (5.45, 33.81, -3.52)),
    ]
    sheet_metal_1_3_8 = Solid(Shell([*[Face.make_surface_from_curves(sheet_metal_1_3_8_from[k], sheet_metal_1_3_8_to[k]) for k in range(2)], Face(Wire(sheet_metal_1_3_8_from)), Face(Wire(sheet_metal_1_3_8_to))]))
    add(sheet_metal_1_3_8, mode=Mode.SUBTRACT)

    # Sheet Metal 1 3 9: loft between two sections, ruled curve by curve
    sheet_metal_1_3_9_from = [
        Edge.make_three_point_arc((5.45, 32.81, -13.28), (7.05, 32.81, -14.88), (5.45, 32.81, -16.48)),
        Edge.make_three_point_arc((5.45, 32.81, -16.48), (3.85, 32.81, -14.88), (5.45, 32.81, -13.28)),
    ]
    sheet_metal_1_3_9_to = [
        Edge.make_three_point_arc((5.45, 33.81, -13.28), (7.05, 33.81, -14.88), (5.45, 33.81, -16.48)),
        Edge.make_three_point_arc((5.45, 33.81, -16.48), (3.85, 33.81, -14.88), (5.45, 33.81, -13.28)),
    ]
    sheet_metal_1_3_9 = Solid(Shell([*[Face.make_surface_from_curves(sheet_metal_1_3_9_from[k], sheet_metal_1_3_9_to[k]) for k in range(2)], Face(Wire(sheet_metal_1_3_9_from)), Face(Wire(sheet_metal_1_3_9_to))]))
    add(sheet_metal_1_3_9, mode=Mode.SUBTRACT)

    # Sheet Metal 1 3 10: loft between two sections, ruled curve by curve
    sheet_metal_1_3_10_from = [
        Edge.make_three_point_arc((55.49, 32.81, -3.52), (57.09, 32.81, -5.12), (55.49, 32.81, -6.72)),
        Edge.make_three_point_arc((55.49, 32.81, -6.72), (53.89, 32.81, -5.12), (55.49, 32.81, -3.52)),
    ]
    sheet_metal_1_3_10_to = [
        Edge.make_three_point_arc((55.49, 33.81, -3.52), (57.09, 33.81, -5.12), (55.49, 33.81, -6.72)),
        Edge.make_three_point_arc((55.49, 33.81, -6.72), (53.89, 33.81, -5.12), (55.49, 33.81, -3.52)),
    ]
    sheet_metal_1_3_10 = Solid(Shell([*[Face.make_surface_from_curves(sheet_metal_1_3_10_from[k], sheet_metal_1_3_10_to[k]) for k in range(2)], Face(Wire(sheet_metal_1_3_10_from)), Face(Wire(sheet_metal_1_3_10_to))]))
    add(sheet_metal_1_3_10, mode=Mode.SUBTRACT)

    # Sheet Metal 1 3 11: loft between two sections, ruled curve by curve
    sheet_metal_1_3_11_from = [
        Edge.make_three_point_arc((55.49, 32.81, -13.28), (57.09, 32.81, -14.88), (55.49, 32.81, -16.48)),
        Edge.make_three_point_arc((55.49, 32.81, -16.48), (53.89, 32.81, -14.88), (55.49, 32.81, -13.28)),
    ]
    sheet_metal_1_3_11_to = [
        Edge.make_three_point_arc((55.49, 33.81, -13.28), (57.09, 33.81, -14.88), (55.49, 33.81, -16.48)),
        Edge.make_three_point_arc((55.49, 33.81, -16.48), (53.89, 33.81, -14.88), (55.49, 33.81, -13.28)),
    ]
    sheet_metal_1_3_11 = Solid(Shell([*[Face.make_surface_from_curves(sheet_metal_1_3_11_from[k], sheet_metal_1_3_11_to[k]) for k in range(2)], Face(Wire(sheet_metal_1_3_11_from)), Face(Wire(sheet_metal_1_3_11_to))]))
    add(sheet_metal_1_3_11, mode=Mode.SUBTRACT)

    # Sheet Metal 1 3 12: loft between two sections, ruled curve by curve
    sheet_metal_1_3_12_from = [
        Edge.make_three_point_arc((1, 23.25, -8.4), (1, 24.85, -10), (1, 23.25, -11.6)),
        Edge.make_three_point_arc((1, 23.25, -11.6), (1, 21.65, -10), (1, 23.25, -8.4)),
    ]
    sheet_metal_1_3_12_to = [
        Edge.make_three_point_arc((0, 23.25, -8.4), (0, 24.85, -10), (0, 23.25, -11.6)),
        Edge.make_three_point_arc((0, 23.25, -11.6), (0, 21.65, -10), (0, 23.25, -8.4)),
    ]
    sheet_metal_1_3_12 = Solid(Shell([*[Face.make_surface_from_curves(sheet_metal_1_3_12_from[k], sheet_metal_1_3_12_to[k]) for k in range(2)], Face(Wire(sheet_metal_1_3_12_from)), Face(Wire(sheet_metal_1_3_12_to))]))
    add(sheet_metal_1_3_12, mode=Mode.SUBTRACT)


solid = part.part
